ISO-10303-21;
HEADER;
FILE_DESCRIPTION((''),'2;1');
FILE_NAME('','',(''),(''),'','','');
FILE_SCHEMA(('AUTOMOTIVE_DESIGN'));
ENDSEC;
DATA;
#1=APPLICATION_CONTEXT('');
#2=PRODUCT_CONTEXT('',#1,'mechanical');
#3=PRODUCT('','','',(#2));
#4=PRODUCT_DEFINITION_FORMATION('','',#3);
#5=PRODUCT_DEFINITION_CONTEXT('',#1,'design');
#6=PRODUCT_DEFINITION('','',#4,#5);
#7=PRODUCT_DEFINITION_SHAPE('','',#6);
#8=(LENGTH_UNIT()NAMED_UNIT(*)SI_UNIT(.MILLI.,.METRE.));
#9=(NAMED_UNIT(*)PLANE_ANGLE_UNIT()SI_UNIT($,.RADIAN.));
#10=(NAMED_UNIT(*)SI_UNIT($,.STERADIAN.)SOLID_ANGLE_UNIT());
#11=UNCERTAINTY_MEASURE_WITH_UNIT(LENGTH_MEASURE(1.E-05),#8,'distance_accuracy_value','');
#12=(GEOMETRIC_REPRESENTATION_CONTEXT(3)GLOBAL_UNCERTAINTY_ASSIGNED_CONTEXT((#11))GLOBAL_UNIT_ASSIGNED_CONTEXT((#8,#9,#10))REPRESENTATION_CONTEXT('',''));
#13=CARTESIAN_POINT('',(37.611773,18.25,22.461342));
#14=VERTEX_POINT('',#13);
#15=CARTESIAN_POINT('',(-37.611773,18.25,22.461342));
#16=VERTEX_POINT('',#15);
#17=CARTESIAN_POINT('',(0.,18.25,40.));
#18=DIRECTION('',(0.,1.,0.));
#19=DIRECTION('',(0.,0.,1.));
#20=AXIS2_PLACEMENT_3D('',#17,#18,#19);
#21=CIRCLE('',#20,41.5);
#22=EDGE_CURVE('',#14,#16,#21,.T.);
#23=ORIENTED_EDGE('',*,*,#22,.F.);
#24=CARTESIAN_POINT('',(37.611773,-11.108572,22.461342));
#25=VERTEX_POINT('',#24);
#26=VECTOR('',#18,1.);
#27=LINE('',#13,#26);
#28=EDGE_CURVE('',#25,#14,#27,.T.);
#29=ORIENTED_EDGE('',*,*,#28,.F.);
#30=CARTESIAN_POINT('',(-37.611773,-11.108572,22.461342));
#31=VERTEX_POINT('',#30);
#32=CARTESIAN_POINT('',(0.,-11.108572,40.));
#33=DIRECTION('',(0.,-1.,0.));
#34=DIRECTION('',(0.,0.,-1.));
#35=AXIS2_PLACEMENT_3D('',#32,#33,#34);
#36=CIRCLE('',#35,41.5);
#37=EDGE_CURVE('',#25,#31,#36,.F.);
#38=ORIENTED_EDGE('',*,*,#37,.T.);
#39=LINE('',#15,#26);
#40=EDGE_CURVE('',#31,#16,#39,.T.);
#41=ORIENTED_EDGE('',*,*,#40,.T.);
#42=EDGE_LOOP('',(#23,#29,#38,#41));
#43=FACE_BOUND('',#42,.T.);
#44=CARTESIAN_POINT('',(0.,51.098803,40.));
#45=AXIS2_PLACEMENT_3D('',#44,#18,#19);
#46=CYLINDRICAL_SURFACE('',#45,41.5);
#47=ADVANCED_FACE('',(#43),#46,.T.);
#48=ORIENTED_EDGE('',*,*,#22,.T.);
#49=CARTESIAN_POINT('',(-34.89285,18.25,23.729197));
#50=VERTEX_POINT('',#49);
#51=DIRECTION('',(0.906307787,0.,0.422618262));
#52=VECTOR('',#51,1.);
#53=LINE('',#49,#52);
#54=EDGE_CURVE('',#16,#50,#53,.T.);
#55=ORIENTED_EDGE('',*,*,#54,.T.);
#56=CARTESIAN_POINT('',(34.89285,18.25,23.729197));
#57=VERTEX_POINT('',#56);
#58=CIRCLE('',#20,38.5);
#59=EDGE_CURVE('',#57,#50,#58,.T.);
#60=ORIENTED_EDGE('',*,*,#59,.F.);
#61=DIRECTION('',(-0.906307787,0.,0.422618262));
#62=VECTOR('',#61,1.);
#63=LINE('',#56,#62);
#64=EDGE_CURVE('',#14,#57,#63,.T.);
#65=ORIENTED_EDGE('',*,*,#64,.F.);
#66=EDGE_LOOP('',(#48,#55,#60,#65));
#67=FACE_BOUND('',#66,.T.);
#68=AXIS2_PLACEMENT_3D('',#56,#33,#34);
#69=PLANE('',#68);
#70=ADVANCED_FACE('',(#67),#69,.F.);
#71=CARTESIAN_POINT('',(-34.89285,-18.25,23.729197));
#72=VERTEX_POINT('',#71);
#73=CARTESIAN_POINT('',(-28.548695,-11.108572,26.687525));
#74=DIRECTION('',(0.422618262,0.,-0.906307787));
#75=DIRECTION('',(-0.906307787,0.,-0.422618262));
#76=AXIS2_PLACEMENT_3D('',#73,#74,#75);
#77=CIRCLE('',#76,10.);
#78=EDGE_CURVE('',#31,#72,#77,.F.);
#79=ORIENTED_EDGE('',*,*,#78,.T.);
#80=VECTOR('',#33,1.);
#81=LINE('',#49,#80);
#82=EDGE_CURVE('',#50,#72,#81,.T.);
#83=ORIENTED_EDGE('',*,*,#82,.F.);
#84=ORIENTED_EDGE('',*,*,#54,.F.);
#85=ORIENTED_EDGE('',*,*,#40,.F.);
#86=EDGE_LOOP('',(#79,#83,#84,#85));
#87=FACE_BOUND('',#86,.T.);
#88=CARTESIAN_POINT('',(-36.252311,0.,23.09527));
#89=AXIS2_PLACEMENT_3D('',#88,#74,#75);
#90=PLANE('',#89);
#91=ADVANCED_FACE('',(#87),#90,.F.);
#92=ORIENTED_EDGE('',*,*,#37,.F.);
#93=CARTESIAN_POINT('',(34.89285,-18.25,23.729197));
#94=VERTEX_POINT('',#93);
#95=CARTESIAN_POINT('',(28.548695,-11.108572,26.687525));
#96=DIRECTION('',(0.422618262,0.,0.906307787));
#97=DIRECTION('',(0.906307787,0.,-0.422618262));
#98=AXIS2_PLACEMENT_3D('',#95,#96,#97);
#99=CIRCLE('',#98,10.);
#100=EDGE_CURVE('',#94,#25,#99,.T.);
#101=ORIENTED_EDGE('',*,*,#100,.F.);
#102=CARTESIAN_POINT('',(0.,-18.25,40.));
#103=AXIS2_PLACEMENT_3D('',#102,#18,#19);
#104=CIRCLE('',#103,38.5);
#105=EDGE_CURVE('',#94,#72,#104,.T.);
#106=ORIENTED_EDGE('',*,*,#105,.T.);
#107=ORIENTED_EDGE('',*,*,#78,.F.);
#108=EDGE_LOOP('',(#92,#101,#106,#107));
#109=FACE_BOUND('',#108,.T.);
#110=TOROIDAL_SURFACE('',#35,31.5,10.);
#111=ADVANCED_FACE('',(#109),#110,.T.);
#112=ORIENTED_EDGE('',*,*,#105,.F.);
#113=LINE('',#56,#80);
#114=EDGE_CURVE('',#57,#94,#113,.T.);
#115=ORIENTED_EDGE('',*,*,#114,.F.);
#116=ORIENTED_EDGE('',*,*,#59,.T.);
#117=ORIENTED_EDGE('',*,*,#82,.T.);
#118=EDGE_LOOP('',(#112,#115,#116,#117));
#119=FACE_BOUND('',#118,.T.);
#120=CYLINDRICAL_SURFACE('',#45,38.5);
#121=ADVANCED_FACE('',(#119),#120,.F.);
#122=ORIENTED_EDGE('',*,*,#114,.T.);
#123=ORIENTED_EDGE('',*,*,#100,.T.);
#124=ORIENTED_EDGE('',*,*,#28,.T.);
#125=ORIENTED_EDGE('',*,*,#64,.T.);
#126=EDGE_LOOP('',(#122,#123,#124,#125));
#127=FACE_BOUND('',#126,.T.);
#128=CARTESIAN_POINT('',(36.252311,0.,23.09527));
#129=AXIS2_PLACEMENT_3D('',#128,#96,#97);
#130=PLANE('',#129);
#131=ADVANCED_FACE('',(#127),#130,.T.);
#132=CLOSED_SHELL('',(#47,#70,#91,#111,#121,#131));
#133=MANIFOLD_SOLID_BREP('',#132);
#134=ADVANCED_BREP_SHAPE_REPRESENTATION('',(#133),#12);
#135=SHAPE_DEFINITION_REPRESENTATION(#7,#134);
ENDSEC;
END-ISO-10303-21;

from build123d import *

# Parameters (mm, degrees)
SKETCH2_W                = 3
SKETCH2_H                = 36.5
REVOLVE1_ANGLE           = 65
REVOLVE1_OTHER_WAY_ANGLE = 65
FILLET1_R                = 10


with BuildPart() as part:
    # Sketch2 → Revolve1 (revolve)
    with BuildSketch(Plane(origin=(0, 0, 0), x_dir=(0, 0, -1), z_dir=(1, 0, 0))):
        Rectangle(SKETCH2_W, SKETCH2_H)
    revolve(axis=Axis((0, 51.098803243, 40), (0, -1, 0)), revolution_arc=REVOLVE1_ANGLE)

    # Sketch2 → Revolve1 other way (revolve)
    with BuildSketch(Plane(origin=(0, 0, 0), x_dir=(0, 0, -1), z_dir=(1, 0, 0))):
        Rectangle(SKETCH2_W, SKETCH2_H)
    revolve(axis=Axis((0, 51.098803243, 40), (0, 1, 0)), revolution_arc=REVOLVE1_OTHER_WAY_ANGLE)

    # Fillet1
    # the kernel refuses this fillet: 10 mm, written as the material it takes off along each edge
    with BuildSketch(Plane(origin=(0, -18.25, 40), x_dir=(0.9999833818501401, 0, -0.005765069258622961), z_dir=(0.005765069258622961, 0, 0.9999833818501401))) as fillet1_piece_1:
        with BuildLine():
            CenterArc((31.5, 7.141428429), FILLET1_R, 314.427004001, 45.572995999)
            Line((41.5, 7.141428429), (41.7, 7.141428429))
            Line((41.7, 7.141428429), (41.7, 0))
            Line((41.7, 0), (41.5, -0.2))
            ThreePointArc((41.5, -0.2), (40, -0.2), (38.64, -0.142828569))
            Line((38.64, -0.142828569), (38.5, 0))
        make_face()
    revolve(axis=Axis((0, -18.25, 40), (0, 1, 0)), revolution_arc=179.339368066, mode=Mode.SUBTRACT)


solid = part.part
